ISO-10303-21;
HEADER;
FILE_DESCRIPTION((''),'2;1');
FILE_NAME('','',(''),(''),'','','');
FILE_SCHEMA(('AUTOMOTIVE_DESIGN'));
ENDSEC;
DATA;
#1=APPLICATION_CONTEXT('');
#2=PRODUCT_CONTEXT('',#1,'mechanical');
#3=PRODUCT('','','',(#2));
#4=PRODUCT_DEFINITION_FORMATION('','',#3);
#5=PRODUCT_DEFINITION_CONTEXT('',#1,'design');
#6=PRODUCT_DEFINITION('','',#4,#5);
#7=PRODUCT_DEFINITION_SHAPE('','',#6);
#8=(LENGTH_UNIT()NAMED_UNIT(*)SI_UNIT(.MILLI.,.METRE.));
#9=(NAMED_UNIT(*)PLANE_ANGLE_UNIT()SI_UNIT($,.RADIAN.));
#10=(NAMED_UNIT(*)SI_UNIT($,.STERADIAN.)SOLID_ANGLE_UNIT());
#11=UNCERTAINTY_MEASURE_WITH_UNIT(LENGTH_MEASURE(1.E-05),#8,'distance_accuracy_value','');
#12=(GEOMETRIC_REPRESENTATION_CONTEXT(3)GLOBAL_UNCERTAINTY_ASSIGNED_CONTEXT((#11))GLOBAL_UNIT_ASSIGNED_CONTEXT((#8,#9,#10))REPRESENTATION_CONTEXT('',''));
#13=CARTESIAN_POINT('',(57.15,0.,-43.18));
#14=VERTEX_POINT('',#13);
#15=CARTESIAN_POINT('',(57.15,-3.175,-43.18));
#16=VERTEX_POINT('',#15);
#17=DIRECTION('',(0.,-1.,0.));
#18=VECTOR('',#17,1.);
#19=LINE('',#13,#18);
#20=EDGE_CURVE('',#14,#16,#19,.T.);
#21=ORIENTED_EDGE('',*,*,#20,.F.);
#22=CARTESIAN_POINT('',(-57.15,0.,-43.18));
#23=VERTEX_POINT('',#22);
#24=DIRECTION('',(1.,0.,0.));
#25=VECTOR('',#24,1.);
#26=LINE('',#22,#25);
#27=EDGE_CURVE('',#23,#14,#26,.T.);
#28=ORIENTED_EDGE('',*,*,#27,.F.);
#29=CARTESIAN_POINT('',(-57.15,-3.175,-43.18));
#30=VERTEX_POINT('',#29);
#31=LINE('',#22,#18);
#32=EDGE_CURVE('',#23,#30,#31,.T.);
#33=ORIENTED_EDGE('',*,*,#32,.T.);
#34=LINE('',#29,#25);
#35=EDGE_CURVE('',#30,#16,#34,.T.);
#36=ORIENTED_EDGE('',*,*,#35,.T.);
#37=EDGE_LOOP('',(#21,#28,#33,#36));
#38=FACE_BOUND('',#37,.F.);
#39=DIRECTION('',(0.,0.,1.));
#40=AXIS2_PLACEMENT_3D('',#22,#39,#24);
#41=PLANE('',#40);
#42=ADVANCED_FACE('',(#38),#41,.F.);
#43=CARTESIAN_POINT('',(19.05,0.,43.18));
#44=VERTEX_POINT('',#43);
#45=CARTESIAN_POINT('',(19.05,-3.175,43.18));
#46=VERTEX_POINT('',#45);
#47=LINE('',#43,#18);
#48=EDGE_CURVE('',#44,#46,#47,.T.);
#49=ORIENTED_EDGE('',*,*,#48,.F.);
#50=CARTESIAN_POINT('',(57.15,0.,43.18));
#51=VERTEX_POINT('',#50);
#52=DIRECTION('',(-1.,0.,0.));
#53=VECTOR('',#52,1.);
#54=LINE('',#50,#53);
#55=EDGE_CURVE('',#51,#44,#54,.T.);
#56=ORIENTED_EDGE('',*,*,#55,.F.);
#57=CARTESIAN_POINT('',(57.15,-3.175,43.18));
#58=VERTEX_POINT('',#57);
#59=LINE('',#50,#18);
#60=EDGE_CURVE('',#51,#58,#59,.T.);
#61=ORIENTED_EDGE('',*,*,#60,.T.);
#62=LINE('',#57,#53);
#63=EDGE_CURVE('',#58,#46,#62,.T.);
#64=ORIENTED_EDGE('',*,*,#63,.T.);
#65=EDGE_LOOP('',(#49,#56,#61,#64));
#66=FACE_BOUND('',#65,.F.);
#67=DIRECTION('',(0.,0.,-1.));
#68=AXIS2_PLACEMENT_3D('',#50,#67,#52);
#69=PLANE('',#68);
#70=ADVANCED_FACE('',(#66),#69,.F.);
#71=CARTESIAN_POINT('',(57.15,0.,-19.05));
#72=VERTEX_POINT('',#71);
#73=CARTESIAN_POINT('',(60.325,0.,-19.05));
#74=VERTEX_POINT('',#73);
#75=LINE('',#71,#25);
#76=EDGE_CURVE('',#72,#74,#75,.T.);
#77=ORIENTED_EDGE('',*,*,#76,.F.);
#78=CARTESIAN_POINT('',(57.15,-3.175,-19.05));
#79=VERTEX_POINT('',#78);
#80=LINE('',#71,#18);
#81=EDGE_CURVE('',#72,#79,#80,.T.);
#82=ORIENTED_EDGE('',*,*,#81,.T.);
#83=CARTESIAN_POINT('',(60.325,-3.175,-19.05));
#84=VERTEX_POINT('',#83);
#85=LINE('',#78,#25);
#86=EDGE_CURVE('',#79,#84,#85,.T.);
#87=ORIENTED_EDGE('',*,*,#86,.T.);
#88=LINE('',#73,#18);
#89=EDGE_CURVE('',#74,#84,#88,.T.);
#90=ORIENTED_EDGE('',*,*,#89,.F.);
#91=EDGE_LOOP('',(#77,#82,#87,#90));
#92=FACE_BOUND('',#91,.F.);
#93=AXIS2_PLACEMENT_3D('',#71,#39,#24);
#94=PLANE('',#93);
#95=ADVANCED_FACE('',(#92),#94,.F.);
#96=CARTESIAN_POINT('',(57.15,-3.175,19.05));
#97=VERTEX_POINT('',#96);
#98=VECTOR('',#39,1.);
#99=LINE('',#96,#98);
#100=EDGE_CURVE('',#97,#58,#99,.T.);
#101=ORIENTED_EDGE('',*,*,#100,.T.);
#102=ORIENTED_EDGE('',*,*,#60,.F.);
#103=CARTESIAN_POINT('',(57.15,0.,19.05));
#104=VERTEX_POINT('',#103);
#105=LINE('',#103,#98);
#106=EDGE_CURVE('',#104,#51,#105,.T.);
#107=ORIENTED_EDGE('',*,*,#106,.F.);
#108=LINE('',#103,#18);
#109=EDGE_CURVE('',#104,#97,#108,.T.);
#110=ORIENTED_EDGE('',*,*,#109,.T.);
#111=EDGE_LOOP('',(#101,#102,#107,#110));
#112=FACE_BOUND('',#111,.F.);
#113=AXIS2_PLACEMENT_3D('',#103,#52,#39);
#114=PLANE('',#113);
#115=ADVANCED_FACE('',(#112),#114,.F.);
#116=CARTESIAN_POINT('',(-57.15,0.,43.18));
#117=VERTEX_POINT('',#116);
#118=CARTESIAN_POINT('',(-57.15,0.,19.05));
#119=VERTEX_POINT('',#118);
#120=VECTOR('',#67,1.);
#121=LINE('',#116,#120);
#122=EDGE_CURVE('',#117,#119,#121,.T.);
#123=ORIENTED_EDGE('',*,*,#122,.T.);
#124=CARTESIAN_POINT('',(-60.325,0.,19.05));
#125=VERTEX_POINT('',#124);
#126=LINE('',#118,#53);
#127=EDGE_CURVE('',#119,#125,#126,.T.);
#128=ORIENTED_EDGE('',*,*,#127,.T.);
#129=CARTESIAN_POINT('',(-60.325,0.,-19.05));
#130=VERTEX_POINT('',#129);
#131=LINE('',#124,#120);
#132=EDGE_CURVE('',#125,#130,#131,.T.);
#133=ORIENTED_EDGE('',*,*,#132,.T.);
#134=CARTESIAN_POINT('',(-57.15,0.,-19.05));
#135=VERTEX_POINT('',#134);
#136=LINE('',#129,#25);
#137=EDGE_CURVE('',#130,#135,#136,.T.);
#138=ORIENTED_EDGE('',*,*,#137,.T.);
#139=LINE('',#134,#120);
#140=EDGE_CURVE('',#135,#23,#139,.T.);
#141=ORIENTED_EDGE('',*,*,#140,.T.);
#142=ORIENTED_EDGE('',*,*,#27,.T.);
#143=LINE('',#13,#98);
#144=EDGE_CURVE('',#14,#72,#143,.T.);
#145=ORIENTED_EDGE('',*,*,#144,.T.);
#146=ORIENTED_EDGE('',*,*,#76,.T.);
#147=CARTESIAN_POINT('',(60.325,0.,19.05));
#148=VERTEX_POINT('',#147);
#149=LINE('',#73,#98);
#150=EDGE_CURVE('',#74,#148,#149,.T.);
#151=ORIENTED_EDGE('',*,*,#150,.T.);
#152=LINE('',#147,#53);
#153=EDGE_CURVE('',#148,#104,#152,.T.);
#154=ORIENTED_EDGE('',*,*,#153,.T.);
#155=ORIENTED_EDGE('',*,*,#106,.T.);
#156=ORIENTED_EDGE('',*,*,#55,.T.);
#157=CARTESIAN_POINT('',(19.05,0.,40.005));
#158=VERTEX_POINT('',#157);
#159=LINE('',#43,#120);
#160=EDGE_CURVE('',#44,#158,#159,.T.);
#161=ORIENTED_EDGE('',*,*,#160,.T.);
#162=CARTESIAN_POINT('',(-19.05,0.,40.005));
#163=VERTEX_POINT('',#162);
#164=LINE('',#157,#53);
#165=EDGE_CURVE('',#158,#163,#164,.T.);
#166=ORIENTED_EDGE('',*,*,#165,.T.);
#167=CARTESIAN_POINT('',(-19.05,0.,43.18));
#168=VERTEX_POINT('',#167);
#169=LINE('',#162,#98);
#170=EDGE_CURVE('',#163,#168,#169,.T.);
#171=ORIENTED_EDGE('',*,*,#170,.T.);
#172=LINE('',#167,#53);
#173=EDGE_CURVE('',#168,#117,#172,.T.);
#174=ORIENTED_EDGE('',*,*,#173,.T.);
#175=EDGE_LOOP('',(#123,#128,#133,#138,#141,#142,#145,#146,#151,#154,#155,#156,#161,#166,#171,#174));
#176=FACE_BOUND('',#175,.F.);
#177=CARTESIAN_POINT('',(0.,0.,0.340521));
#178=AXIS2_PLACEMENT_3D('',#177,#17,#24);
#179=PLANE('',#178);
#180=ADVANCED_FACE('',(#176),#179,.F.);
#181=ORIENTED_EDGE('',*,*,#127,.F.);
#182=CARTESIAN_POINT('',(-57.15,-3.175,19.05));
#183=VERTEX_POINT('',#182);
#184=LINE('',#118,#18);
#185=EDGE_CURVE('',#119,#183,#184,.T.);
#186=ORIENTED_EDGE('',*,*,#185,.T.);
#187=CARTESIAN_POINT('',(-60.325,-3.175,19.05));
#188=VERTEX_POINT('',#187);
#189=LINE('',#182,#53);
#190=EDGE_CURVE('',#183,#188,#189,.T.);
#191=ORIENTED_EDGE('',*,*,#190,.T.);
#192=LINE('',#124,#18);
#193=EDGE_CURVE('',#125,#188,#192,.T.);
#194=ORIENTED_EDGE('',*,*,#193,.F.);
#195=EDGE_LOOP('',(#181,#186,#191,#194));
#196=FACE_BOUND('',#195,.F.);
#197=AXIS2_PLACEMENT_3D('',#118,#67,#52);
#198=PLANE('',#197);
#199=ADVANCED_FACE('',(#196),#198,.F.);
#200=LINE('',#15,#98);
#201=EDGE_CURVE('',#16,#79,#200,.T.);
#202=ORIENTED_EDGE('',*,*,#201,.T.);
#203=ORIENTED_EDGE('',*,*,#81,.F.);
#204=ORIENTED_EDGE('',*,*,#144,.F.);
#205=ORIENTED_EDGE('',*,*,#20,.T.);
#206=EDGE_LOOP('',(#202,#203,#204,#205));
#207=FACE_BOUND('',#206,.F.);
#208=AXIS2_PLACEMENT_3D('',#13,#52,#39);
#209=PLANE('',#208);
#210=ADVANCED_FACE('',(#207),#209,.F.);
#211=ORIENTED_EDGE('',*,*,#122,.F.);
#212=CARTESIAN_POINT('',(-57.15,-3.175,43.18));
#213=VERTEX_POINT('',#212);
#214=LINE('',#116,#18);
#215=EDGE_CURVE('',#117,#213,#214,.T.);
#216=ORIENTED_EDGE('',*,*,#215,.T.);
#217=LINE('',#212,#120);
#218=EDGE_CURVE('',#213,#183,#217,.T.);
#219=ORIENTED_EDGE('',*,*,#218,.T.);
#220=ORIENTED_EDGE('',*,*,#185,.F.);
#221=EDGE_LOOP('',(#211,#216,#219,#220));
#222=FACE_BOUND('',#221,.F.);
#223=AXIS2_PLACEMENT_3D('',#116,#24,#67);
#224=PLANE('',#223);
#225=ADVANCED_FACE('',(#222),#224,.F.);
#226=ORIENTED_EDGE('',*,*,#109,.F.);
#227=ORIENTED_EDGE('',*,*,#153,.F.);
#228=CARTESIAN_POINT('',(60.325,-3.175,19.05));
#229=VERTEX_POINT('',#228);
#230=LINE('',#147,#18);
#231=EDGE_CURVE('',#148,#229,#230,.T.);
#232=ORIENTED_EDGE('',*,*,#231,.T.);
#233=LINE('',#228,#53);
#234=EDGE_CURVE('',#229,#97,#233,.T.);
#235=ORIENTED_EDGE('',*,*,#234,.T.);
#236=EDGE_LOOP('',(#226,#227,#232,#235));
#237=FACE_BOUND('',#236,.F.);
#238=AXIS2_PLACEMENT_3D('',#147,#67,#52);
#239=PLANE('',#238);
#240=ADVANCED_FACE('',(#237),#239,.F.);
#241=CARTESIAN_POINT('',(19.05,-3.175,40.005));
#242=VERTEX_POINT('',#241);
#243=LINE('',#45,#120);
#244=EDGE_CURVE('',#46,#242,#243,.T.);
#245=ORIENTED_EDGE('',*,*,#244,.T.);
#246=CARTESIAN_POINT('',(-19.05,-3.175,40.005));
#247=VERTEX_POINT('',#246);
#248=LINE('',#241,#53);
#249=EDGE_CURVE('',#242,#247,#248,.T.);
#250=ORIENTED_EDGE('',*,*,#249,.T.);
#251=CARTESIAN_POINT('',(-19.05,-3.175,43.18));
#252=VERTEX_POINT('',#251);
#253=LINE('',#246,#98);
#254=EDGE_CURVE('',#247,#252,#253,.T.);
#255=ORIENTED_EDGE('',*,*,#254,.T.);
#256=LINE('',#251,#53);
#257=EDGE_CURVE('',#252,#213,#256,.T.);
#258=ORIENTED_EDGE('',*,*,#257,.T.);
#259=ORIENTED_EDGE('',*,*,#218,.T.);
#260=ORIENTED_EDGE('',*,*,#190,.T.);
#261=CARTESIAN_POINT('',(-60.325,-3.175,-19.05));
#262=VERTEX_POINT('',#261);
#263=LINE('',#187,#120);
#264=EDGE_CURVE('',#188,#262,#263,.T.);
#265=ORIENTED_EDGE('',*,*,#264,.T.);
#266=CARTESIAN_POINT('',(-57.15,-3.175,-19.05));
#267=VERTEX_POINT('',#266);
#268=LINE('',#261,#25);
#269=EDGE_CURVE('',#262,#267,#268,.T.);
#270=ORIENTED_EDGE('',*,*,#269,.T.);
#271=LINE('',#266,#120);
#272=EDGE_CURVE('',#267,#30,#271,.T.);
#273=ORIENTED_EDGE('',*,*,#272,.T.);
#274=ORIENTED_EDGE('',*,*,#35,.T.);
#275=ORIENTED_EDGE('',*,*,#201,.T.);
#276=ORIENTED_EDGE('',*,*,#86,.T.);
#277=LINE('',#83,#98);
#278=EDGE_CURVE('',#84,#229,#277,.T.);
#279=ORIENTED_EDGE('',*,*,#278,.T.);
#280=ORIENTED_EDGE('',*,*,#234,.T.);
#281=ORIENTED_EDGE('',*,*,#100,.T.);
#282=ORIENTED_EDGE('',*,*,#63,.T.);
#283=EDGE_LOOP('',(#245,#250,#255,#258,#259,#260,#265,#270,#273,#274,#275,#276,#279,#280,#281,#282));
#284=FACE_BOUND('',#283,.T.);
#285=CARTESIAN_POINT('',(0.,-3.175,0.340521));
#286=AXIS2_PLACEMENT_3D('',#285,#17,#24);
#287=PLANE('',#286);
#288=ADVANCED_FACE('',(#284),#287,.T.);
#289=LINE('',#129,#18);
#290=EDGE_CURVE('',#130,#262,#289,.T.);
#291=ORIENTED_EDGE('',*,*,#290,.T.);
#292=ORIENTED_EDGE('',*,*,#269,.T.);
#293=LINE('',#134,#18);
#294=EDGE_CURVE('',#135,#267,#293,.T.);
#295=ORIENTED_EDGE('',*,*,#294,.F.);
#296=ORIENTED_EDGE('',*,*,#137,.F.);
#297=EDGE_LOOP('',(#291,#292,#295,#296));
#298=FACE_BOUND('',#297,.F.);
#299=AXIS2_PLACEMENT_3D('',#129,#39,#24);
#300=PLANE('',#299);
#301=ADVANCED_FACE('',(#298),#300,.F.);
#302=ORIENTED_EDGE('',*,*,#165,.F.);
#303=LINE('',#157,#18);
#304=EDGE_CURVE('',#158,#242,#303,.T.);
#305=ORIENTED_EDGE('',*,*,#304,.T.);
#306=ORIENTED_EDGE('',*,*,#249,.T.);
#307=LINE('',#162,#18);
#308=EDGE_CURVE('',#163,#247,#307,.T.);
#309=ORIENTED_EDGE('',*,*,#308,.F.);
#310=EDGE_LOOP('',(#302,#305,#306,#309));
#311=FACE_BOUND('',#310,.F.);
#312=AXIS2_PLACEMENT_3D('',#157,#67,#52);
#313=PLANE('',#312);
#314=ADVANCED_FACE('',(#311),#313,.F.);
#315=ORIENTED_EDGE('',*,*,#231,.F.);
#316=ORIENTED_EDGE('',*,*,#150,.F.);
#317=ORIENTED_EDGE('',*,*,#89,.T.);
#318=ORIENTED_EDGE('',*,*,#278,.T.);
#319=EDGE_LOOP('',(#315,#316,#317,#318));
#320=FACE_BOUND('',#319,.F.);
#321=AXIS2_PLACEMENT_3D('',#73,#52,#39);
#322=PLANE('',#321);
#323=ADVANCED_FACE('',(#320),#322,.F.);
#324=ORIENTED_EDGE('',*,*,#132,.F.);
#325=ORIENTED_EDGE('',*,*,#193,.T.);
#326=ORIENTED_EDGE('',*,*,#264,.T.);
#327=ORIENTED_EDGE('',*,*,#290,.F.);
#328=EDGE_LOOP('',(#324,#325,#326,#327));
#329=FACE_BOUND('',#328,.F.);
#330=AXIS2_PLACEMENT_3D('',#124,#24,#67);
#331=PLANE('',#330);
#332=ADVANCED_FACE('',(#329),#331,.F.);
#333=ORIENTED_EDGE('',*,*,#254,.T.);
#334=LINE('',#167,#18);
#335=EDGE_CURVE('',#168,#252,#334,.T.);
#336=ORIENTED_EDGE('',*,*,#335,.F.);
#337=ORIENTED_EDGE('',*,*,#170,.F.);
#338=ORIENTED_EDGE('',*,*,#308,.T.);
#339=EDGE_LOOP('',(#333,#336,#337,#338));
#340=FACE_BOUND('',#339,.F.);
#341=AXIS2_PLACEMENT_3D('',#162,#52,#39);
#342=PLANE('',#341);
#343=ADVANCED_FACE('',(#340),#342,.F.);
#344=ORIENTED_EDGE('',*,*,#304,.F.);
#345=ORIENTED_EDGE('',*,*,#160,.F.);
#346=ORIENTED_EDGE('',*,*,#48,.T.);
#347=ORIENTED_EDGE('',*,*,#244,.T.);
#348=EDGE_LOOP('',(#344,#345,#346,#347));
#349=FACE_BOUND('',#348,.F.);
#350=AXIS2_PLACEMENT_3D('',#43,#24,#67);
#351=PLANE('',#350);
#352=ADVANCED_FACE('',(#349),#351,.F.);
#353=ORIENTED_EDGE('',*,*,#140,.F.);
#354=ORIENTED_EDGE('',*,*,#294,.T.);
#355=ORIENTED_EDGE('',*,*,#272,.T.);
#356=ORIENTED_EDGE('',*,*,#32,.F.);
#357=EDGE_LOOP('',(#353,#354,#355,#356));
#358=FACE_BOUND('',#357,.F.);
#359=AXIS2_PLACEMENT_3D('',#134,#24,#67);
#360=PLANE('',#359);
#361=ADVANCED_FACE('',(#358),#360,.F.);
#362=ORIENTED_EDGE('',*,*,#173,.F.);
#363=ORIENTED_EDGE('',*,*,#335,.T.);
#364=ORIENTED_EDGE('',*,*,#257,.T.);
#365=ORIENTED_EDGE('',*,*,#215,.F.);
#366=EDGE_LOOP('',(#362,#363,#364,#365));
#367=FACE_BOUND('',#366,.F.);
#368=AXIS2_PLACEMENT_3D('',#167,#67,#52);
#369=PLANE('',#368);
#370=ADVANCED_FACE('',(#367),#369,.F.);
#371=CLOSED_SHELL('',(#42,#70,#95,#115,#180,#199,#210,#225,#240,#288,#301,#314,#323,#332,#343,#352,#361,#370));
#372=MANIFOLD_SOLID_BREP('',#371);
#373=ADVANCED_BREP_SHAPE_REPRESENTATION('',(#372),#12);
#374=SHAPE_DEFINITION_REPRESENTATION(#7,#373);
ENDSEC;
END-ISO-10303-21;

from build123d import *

# Parameters (mm, degrees)
F1_DEPTH = 3.175


# Not quite as in the source:
# - a feature names something its author has since deleted; it is built from what else it names


with BuildPart() as f1:
    # F0 (on Front) → F1 (new body)
    with BuildSketch(Plane.XZ):
        Polygon((-57.15, -43.18), (57.15, -43.18), (57.15, -19.05), (60.325, -19.05), (60.325, 19.05), (57.15, 19.05), (57.15, 43.18), (19.05, 43.18), (19.05, 40.005), (-19.05, 40.005), (-19.05, 43.18), (-57.15, 43.18), (-57.15, 19.05), (-60.325, 19.05), (-60.325, 0), (-60.325, -19.05), (-57.15, -19.05), align=None)
    extrude(amount=F1_DEPTH)


solid = f1.part
